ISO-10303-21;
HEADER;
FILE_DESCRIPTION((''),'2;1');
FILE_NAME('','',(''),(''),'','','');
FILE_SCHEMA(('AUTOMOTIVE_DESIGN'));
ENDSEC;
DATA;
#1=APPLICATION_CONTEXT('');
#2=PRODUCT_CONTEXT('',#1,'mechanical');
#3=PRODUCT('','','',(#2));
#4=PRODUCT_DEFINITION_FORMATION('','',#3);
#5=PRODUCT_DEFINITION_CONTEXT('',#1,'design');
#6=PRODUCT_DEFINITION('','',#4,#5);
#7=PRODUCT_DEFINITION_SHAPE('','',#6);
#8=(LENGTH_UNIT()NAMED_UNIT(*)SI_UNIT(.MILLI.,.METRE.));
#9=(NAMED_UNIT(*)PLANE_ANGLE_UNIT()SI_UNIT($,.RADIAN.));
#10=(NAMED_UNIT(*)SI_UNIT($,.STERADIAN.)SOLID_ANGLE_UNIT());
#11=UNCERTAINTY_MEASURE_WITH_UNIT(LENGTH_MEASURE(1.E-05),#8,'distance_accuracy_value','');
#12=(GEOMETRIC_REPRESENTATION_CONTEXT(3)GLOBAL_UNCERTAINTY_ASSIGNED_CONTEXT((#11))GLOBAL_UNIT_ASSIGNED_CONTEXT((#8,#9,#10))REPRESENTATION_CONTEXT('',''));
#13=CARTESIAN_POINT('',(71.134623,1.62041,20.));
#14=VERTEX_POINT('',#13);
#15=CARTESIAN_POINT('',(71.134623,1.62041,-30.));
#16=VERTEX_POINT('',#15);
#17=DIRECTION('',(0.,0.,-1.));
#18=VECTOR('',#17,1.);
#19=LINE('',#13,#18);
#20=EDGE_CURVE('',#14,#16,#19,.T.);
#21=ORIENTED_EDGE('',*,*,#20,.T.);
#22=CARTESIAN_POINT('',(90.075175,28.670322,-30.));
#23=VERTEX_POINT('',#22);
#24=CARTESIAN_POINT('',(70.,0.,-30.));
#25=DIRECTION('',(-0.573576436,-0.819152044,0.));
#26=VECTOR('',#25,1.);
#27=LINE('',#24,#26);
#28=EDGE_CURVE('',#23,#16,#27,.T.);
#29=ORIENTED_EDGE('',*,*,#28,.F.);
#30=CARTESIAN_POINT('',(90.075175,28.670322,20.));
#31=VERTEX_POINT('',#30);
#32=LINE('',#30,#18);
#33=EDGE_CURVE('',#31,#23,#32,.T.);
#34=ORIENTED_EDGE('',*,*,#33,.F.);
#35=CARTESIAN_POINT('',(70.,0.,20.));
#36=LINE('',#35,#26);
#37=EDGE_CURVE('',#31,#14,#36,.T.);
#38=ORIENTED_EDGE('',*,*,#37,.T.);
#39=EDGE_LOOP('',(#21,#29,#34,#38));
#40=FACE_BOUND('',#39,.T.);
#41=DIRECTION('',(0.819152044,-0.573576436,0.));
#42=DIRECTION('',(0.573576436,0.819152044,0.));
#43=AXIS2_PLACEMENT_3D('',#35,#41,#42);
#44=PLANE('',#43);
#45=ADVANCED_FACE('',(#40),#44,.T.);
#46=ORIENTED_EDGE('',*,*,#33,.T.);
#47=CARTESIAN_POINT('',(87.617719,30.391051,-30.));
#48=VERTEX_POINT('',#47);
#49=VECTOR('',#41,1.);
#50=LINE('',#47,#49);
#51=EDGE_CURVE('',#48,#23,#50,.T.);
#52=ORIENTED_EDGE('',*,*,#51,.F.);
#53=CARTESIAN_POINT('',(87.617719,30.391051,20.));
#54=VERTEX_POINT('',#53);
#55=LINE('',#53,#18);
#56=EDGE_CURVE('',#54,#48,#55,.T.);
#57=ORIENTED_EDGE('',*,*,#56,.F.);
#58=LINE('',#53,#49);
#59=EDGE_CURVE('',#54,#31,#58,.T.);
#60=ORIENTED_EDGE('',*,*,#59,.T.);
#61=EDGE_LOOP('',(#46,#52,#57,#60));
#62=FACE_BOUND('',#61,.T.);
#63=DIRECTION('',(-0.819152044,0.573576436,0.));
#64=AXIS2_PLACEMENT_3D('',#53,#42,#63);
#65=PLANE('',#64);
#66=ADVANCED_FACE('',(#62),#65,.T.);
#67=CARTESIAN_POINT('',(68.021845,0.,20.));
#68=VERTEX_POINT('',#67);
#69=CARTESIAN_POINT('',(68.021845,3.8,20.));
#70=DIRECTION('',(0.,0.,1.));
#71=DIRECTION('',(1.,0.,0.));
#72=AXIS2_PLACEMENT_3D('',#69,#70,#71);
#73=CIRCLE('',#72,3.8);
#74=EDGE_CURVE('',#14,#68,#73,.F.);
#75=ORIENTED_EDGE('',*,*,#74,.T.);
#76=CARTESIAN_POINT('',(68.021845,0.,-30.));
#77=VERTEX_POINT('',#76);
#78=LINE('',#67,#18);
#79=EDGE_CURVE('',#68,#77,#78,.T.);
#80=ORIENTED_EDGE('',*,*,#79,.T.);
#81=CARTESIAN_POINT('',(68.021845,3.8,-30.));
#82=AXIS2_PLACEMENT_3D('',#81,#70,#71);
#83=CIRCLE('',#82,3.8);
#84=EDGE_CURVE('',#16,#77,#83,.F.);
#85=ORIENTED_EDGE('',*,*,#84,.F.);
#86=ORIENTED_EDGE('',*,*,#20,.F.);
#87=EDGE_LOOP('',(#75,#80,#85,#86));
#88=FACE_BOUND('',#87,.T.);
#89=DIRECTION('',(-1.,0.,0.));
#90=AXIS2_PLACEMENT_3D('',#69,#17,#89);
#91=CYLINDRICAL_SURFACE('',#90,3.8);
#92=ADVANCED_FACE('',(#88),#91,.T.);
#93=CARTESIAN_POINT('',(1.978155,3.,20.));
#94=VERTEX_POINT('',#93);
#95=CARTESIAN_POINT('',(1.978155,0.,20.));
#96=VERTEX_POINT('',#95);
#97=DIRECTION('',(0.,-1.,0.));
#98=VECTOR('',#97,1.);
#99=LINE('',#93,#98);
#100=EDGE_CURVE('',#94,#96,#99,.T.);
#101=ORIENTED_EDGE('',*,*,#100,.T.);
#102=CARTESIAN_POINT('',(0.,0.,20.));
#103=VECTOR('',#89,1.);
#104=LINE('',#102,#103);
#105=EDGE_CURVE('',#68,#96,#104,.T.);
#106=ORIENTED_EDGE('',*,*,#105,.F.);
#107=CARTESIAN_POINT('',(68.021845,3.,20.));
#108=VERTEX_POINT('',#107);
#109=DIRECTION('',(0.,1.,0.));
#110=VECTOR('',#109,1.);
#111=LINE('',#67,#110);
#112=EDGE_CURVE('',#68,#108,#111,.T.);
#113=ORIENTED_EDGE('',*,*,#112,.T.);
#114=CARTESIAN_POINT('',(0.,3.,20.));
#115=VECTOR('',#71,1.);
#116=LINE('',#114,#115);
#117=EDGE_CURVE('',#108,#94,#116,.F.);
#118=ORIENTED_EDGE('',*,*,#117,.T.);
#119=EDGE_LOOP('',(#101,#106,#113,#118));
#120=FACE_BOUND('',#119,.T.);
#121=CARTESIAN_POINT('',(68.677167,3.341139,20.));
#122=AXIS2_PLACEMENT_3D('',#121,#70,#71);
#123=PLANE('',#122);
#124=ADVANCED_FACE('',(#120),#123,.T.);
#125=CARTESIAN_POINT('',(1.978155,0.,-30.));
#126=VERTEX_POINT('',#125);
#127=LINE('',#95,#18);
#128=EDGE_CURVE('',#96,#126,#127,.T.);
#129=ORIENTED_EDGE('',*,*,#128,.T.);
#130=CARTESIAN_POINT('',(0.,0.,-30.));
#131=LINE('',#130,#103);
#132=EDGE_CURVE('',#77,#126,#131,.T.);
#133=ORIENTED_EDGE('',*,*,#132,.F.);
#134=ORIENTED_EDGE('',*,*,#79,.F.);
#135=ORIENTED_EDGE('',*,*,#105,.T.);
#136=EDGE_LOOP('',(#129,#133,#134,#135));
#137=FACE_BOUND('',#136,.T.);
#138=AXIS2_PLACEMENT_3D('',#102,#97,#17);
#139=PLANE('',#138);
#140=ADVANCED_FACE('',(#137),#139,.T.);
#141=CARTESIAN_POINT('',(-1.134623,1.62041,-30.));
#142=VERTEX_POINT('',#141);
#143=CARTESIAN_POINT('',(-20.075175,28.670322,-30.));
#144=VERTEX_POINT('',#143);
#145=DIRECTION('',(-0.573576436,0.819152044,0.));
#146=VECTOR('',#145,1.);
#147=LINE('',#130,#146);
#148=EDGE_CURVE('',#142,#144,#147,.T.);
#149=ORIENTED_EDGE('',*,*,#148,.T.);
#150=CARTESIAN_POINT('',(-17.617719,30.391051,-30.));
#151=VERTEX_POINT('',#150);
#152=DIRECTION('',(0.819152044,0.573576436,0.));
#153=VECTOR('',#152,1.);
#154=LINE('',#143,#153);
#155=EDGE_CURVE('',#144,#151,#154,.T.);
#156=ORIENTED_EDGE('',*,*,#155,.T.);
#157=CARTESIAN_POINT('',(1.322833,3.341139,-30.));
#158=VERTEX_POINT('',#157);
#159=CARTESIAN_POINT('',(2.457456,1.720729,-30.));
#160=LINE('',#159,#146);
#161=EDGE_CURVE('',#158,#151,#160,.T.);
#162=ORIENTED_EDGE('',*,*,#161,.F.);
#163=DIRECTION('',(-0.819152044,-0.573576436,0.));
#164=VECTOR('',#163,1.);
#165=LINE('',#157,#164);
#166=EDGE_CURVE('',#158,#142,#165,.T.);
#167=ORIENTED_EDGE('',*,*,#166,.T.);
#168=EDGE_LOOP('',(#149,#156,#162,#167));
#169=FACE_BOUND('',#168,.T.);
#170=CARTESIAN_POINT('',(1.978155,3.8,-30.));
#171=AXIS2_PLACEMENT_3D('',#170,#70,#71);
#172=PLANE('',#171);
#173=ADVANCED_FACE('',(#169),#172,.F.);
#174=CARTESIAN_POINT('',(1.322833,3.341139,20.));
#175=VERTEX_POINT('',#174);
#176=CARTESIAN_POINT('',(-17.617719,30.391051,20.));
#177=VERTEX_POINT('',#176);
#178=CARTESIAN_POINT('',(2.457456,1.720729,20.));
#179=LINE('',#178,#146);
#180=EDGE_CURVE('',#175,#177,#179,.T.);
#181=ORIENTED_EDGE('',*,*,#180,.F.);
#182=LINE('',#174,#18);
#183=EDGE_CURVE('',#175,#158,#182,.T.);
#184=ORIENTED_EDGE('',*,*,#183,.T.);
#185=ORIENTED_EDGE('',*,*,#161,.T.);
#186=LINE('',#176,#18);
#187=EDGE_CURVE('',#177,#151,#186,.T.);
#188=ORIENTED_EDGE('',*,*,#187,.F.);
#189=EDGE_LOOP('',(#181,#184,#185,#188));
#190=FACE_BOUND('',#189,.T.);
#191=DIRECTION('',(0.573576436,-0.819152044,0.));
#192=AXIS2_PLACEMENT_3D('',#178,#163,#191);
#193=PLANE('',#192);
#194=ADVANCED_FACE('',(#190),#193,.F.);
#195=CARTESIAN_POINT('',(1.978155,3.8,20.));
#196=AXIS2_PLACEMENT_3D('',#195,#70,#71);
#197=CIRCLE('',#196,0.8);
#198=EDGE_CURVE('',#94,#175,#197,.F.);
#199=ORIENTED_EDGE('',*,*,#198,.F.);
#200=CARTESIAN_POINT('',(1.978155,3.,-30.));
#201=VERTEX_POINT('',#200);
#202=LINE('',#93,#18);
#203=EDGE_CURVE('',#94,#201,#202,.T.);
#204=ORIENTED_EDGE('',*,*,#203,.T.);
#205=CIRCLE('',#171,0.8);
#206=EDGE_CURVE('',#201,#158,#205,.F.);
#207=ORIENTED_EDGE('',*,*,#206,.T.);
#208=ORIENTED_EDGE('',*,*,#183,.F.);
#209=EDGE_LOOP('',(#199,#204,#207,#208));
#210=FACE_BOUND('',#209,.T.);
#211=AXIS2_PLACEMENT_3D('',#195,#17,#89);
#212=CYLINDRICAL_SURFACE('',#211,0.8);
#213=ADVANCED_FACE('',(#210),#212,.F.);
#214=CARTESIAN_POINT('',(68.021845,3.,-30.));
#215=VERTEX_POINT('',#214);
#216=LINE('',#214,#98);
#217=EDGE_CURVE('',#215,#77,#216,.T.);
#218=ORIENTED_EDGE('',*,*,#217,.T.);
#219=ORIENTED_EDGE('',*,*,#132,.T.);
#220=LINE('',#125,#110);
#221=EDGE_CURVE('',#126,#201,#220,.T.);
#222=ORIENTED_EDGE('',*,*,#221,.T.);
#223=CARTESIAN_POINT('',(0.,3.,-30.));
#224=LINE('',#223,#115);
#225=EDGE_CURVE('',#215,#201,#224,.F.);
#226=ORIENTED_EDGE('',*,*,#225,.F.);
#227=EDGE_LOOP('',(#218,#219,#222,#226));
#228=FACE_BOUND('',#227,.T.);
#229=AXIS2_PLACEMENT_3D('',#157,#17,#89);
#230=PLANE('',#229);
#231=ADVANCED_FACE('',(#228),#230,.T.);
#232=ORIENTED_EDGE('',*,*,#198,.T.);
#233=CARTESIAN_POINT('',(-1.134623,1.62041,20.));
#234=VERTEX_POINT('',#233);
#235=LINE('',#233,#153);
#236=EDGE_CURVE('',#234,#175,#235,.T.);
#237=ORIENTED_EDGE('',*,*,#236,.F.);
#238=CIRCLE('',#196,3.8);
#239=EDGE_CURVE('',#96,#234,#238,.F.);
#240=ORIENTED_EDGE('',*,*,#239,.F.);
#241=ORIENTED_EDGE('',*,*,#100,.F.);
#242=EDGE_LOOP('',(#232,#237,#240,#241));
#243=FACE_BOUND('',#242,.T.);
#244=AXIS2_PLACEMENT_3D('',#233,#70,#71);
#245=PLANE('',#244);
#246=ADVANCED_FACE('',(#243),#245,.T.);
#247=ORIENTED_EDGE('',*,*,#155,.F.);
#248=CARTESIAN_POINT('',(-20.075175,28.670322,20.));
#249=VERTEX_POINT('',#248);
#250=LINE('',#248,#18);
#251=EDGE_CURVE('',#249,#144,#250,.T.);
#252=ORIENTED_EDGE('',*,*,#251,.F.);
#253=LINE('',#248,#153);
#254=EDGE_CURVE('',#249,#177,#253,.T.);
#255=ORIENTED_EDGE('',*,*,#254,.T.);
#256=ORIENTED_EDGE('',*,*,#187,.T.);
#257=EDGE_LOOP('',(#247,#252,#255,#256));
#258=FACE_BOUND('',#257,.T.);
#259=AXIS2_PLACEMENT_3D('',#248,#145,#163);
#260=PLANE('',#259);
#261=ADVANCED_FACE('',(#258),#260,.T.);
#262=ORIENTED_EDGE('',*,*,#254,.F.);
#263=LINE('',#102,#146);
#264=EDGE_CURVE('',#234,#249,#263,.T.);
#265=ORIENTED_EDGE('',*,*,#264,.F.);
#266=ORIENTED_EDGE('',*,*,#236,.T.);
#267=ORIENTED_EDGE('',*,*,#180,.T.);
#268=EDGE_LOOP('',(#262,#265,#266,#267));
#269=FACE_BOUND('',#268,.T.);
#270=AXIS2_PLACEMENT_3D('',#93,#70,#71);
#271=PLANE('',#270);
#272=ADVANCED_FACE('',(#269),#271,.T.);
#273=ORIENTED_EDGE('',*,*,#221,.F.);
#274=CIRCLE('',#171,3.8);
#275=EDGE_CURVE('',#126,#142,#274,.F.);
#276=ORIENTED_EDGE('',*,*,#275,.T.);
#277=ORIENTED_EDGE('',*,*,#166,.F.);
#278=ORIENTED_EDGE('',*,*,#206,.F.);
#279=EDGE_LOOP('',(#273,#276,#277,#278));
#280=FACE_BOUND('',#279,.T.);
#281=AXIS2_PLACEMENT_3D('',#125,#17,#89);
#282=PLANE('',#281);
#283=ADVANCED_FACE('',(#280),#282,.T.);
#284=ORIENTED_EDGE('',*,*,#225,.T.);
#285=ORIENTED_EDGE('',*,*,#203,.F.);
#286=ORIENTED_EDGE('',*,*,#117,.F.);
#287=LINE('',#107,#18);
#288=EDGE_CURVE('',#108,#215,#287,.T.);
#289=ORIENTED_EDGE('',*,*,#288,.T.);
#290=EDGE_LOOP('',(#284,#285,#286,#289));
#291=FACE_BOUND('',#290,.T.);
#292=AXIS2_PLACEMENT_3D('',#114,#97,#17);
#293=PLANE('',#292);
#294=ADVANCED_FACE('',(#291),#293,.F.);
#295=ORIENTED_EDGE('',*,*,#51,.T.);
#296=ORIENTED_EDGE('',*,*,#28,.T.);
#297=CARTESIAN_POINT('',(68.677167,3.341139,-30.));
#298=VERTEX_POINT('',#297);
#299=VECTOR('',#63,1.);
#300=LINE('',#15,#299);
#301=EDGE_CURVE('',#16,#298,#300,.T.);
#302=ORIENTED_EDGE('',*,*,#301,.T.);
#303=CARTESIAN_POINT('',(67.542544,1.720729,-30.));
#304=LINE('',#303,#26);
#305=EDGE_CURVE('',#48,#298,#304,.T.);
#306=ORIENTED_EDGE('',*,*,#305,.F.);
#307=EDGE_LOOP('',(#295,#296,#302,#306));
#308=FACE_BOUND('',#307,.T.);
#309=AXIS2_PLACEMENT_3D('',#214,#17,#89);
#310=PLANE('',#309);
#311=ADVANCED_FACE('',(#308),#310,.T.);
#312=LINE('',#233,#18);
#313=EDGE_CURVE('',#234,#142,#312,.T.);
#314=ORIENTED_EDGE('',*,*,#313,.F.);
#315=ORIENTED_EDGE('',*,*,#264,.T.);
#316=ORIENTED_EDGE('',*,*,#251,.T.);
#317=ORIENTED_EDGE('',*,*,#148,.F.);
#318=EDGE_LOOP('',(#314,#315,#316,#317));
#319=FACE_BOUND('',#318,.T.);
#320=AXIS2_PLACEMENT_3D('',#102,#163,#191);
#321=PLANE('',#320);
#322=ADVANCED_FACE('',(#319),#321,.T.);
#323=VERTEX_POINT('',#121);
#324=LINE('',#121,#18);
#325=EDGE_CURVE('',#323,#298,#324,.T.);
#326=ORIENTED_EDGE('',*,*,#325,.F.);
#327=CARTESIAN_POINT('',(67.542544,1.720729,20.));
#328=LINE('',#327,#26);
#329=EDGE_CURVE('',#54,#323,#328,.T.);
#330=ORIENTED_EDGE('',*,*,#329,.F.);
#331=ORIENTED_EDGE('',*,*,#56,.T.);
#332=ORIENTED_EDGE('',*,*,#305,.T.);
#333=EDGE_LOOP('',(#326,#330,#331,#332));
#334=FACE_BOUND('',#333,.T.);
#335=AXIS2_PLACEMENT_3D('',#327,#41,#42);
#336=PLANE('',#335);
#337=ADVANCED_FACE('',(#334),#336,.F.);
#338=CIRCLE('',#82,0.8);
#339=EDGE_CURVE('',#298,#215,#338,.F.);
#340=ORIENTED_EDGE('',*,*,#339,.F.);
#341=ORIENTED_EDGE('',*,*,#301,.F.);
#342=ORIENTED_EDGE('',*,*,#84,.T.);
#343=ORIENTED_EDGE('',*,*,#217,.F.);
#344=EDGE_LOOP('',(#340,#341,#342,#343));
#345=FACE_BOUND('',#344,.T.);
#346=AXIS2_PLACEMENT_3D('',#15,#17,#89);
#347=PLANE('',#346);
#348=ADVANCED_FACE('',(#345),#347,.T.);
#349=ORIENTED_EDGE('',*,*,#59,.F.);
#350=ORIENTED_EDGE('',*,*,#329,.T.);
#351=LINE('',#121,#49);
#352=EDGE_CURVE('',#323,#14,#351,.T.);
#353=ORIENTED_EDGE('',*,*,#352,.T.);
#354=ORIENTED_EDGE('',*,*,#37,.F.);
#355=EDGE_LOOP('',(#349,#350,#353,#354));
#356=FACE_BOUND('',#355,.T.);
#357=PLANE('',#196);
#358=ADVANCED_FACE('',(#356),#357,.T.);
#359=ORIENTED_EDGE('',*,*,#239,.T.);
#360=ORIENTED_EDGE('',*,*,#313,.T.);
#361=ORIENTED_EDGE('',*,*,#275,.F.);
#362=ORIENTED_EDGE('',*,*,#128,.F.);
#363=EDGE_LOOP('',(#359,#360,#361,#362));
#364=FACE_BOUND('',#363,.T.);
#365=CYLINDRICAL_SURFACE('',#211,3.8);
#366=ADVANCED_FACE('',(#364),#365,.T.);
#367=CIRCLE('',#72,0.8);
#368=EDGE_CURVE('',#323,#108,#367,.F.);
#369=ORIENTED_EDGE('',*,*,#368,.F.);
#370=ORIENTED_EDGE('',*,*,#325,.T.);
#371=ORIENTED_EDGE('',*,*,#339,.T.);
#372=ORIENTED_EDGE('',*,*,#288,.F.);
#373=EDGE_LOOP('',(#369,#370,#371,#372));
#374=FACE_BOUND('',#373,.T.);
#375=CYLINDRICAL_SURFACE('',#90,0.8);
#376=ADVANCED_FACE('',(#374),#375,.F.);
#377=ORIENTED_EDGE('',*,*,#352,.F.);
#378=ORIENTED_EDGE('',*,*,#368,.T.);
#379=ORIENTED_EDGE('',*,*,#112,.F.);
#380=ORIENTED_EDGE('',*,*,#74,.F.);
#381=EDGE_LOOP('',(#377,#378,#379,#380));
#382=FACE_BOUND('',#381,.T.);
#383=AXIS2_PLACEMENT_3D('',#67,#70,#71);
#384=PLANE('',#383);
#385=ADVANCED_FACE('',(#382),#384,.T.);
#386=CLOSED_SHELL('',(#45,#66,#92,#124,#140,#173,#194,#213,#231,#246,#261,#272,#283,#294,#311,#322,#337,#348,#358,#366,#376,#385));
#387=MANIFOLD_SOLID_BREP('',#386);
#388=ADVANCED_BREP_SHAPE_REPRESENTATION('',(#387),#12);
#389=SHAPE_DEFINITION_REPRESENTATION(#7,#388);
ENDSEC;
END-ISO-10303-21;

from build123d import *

# Parameters (mm, degrees)
BASE_FLANGE1_DEPTH      = 20
BASE_FLANGE1_DEPTH_BACK = 30


# Sheet-metal steps are written as plain solids
with BuildPart() as part:
    # Sketch2 → Base-Flange1 (new, two sides: drawn at the far end of the back side and taken through both)
    with BuildSketch(Plane.XY.offset(-BASE_FLANGE1_DEPTH_BACK)):
        with BuildLine():
            Line((-20.075175272, 28.67032155), (-1.134622976, 1.620409542))
            ThreePointArc((-1.134622976, 1.620409542), (0.223510062, 0.429358834), (1.978154792, 0))
            Line((1.978154792, 0), (68.021845208, 0))
            ThreePointArc((68.021845208, 0), (69.776489938, 0.429358834), (71.134622976, 1.620409542))
            Line((71.134622976, 1.620409542), (90.075175272, 28.67032155))
            Line((90.075175272, 28.67032155), (87.617719139, 30.391050859))
            Line((87.617719139, 30.391050859), (68.677166843, 3.341138851))
            ThreePointArc((68.677166843, 3.341138851), (68.391244098, 3.090391333), (68.021845208, 3))
            Line((68.021845208, 3), (1.978154792, 3))
            ThreePointArc((1.978154792, 3), (1.608755902, 3.090391333), (1.322833157, 3.341138851))
            Line((1.322833157, 3.341138851), (-17.617719139, 30.391050859))
            Line((-17.617719139, 30.391050859), (-20.075175272, 28.67032155))
        make_face()
    extrude(amount=BASE_FLANGE1_DEPTH + BASE_FLANGE1_DEPTH_BACK)


solid = part.part
